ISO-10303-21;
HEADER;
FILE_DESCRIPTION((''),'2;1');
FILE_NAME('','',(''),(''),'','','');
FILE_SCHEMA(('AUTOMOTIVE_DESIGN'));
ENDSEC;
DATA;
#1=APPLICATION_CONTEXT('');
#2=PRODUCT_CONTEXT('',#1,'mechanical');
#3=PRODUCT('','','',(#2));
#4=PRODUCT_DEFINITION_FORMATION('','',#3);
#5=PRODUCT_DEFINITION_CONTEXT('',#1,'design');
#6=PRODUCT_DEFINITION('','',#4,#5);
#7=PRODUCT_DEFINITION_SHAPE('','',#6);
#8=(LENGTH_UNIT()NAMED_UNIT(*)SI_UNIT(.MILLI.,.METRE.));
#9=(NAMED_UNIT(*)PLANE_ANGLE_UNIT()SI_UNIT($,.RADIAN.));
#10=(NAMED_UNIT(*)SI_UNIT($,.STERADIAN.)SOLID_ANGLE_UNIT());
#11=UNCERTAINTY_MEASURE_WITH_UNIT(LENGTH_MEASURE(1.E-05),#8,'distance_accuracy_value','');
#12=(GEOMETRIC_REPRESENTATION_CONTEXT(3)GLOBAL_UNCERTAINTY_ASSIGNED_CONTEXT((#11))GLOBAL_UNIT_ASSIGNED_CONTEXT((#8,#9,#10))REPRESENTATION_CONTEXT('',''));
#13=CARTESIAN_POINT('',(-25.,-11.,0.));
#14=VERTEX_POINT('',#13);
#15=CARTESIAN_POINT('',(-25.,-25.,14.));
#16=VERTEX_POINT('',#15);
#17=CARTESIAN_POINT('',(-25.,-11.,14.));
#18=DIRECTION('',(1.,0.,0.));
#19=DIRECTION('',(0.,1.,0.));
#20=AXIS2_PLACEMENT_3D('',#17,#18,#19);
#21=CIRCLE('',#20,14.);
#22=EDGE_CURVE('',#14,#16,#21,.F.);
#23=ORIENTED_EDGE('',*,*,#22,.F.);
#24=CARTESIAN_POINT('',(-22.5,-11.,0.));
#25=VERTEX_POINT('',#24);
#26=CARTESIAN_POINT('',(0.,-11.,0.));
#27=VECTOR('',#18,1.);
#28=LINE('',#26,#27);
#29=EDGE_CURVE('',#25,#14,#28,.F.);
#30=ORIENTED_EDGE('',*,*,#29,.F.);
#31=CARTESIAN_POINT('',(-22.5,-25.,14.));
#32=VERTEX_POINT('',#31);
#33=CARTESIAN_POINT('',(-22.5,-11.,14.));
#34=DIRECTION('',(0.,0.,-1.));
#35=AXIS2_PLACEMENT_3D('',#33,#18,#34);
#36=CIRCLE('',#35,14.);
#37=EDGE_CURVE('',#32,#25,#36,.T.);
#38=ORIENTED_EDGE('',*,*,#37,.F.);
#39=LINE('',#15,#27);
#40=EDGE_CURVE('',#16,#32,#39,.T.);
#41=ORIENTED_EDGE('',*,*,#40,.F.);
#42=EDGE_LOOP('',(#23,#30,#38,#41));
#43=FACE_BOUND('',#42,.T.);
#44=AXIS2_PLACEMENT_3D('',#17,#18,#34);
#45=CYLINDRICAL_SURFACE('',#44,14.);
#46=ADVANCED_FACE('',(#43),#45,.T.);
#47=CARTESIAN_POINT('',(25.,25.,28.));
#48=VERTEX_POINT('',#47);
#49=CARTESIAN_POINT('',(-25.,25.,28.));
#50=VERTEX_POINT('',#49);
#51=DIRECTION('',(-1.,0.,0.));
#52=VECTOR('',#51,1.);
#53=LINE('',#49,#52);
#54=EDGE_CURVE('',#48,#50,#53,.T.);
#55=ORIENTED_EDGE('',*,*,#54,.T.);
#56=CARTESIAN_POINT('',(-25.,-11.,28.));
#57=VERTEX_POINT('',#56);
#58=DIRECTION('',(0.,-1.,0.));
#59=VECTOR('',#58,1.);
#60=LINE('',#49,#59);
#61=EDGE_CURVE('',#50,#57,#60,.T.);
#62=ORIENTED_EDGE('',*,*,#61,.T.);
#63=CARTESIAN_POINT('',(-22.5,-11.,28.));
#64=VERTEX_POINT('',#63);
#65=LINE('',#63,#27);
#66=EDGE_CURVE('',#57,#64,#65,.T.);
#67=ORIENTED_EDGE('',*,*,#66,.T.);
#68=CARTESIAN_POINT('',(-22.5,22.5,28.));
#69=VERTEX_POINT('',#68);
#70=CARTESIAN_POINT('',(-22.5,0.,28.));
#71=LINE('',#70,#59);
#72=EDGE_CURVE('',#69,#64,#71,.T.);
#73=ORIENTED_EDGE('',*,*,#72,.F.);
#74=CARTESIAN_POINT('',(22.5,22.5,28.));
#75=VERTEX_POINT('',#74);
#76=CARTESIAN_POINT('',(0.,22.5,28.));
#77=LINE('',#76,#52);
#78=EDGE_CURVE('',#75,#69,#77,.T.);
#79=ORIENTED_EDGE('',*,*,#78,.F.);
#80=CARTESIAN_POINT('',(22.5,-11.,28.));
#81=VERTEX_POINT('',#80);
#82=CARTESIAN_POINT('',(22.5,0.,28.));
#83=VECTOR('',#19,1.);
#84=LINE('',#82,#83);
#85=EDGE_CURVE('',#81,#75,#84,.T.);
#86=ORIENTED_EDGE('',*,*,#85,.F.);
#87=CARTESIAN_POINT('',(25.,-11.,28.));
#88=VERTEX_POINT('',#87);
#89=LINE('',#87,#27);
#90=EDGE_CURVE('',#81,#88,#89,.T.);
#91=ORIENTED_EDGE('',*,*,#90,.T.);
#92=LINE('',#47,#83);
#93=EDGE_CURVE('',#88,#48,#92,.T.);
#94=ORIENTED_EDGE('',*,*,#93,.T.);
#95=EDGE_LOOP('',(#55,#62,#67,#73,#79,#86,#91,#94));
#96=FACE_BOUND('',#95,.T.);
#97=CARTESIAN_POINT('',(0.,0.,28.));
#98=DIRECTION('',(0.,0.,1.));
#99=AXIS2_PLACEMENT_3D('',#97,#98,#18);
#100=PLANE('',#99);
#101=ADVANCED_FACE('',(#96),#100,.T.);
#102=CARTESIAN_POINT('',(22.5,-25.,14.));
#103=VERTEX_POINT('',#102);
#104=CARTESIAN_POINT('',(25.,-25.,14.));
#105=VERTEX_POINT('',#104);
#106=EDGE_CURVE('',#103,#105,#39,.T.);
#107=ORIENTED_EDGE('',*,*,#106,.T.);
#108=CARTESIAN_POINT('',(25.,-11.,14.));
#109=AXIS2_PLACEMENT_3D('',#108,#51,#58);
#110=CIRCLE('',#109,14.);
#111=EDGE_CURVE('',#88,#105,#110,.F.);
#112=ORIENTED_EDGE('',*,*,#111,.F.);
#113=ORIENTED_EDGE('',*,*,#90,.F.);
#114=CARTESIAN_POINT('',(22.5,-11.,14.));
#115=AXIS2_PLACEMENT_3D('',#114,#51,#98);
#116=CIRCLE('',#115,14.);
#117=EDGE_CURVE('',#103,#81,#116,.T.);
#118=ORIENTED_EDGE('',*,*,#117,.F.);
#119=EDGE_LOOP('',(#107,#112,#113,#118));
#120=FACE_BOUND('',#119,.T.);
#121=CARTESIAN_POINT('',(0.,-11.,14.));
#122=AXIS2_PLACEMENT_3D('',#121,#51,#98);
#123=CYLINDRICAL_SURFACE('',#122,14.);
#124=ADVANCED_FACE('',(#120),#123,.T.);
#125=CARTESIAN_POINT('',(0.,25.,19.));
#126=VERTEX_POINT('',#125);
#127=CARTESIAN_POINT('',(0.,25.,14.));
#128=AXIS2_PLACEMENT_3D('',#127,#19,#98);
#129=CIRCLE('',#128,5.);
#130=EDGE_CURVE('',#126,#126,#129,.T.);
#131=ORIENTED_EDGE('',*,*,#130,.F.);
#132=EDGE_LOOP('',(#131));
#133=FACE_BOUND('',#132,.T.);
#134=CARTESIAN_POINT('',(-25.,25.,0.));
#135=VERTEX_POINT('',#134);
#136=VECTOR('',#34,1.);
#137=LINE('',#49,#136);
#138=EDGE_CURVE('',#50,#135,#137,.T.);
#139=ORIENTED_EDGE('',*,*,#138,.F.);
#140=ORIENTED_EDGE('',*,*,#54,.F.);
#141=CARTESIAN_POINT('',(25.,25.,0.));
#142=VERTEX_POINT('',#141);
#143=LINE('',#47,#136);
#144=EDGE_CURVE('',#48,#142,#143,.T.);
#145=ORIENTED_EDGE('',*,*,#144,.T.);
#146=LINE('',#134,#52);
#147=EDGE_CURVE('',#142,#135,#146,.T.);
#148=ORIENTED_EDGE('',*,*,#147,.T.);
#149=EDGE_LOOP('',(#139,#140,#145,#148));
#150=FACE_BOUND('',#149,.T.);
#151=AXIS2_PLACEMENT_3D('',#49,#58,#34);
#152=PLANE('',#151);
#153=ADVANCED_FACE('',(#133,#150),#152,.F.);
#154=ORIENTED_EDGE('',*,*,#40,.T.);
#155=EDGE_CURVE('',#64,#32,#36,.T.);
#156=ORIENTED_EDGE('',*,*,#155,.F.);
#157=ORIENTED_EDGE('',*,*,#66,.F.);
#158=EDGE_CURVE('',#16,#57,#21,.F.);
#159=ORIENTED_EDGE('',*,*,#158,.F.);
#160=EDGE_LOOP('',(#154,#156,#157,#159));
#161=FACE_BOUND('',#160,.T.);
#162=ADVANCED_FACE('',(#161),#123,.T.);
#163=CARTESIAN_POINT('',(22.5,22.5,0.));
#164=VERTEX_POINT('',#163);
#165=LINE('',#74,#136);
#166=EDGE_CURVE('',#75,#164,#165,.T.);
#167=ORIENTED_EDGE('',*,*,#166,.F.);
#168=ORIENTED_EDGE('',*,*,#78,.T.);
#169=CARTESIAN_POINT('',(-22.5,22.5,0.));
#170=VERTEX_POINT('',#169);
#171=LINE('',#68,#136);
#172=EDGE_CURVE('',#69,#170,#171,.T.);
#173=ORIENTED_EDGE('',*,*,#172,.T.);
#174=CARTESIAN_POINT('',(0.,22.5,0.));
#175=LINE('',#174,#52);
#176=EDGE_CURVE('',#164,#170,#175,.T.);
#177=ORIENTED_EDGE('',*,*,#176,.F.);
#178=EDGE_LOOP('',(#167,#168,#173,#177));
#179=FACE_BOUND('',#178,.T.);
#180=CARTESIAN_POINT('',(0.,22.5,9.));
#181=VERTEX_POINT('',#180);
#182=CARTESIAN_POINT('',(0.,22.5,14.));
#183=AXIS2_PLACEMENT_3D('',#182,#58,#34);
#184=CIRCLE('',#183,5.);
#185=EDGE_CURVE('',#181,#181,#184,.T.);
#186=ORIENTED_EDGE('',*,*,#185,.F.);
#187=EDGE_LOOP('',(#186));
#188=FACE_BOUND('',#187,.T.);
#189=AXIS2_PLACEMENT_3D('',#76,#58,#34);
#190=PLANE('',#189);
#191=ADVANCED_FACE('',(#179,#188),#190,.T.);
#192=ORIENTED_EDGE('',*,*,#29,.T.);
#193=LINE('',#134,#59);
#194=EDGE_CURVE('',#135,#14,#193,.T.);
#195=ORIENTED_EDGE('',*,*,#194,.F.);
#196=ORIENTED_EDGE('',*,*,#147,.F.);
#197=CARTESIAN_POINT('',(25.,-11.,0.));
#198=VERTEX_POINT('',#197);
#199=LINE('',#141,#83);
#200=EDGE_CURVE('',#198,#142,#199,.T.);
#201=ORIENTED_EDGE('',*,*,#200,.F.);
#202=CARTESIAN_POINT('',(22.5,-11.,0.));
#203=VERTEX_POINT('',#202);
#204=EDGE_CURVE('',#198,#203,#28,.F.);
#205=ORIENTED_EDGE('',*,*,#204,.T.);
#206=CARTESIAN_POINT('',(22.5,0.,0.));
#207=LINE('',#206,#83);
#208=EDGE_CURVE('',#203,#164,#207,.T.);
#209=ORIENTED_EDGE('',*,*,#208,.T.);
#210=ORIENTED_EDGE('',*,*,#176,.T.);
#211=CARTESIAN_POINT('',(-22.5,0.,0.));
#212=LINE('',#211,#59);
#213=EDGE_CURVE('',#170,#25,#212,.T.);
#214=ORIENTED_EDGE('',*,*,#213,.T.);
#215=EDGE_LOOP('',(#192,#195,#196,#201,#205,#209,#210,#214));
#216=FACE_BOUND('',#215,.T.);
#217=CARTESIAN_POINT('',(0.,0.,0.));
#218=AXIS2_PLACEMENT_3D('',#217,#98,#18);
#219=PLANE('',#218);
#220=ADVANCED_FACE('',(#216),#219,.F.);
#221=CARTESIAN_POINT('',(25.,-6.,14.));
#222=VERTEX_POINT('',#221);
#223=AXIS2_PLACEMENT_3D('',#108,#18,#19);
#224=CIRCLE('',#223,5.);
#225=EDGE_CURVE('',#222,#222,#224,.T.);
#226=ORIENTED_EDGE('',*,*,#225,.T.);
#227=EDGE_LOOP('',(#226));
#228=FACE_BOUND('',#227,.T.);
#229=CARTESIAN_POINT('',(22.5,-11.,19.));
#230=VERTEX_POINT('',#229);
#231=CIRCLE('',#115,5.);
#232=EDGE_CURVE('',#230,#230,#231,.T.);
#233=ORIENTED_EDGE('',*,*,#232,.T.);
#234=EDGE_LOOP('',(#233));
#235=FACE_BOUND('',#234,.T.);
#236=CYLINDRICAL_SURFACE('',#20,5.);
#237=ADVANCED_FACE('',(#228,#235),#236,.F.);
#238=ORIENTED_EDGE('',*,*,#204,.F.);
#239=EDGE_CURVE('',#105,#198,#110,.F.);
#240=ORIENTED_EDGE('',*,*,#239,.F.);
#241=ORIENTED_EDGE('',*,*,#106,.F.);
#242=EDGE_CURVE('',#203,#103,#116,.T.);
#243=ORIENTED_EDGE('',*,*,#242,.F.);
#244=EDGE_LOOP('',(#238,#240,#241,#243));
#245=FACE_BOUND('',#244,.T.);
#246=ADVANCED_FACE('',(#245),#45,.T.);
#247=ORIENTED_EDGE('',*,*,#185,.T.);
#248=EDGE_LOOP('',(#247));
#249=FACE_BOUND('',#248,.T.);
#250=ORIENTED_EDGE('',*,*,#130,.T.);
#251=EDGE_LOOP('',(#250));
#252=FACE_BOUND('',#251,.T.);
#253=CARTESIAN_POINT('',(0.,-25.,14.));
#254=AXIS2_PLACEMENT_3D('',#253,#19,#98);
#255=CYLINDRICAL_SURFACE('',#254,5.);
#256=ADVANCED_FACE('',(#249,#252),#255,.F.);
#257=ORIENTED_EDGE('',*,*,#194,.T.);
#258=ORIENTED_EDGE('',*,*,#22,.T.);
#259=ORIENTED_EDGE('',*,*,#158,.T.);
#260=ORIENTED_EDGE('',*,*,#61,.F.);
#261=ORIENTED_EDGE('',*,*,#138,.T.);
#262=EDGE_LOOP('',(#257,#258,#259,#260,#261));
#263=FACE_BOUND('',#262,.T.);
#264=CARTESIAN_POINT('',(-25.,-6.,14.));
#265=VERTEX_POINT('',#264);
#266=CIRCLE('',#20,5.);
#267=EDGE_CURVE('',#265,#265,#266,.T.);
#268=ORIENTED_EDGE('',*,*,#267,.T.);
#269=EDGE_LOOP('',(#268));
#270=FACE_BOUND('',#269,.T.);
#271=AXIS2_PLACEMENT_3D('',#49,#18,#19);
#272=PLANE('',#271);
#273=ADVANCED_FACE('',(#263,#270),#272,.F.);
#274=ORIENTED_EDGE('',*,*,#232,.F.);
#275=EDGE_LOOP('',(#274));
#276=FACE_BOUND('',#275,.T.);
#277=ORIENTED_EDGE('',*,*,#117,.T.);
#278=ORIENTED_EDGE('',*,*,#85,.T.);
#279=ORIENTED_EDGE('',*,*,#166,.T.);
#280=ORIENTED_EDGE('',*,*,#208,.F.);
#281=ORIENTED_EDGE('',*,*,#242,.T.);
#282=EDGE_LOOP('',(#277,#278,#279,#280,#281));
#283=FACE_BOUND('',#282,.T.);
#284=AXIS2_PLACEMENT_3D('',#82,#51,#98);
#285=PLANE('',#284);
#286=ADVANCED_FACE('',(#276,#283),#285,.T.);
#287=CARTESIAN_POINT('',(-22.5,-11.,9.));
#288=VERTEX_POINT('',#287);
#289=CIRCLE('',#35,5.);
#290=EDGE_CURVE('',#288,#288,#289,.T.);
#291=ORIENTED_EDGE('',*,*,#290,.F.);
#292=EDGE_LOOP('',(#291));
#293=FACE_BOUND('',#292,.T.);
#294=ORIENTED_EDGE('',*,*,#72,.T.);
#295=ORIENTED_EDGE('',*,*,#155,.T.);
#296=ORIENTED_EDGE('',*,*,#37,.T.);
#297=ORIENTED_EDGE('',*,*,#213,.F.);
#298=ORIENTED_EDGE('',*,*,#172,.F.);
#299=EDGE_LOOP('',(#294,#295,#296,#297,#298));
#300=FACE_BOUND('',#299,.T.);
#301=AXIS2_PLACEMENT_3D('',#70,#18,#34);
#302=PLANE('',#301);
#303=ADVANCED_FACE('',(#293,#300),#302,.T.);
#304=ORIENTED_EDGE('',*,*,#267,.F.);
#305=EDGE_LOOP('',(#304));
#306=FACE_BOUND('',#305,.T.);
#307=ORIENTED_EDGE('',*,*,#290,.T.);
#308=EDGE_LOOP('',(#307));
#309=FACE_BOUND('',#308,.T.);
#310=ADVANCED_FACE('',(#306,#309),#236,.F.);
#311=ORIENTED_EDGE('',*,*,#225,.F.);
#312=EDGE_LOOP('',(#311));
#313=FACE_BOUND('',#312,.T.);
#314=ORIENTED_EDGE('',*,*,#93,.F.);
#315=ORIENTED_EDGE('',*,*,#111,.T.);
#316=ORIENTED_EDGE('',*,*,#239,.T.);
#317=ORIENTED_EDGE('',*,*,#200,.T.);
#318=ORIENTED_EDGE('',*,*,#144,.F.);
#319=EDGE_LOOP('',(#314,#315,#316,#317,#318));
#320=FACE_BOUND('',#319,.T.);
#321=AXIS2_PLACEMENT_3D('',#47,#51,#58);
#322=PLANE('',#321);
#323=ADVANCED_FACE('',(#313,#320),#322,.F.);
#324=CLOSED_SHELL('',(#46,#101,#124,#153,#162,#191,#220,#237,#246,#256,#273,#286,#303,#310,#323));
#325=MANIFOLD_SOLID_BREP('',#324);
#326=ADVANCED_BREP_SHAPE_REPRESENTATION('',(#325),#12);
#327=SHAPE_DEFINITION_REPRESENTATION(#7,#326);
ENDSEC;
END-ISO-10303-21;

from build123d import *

# Parameters (mm, degrees)
ESBO_O1_W                = 50
ESBO_O1_H                = 50
RESSALTO_EXTRUS_O1_DEPTH = 28
ESBO_O2_W                = 45
ESBO_O2_H                = 47.5
CORTE_EXTRUS_O1_DEPTH    = 28
ESBO_O3_R                = 5
CORTE_EXTRUS_O2_DEPTH    = 63.521996129
ESBO_O4_R                = 5
CORTE_EXTRUS_O3_DEPTH    = 63.521996129
FILETE1_R                = 14


with BuildPart() as part:
    # Esboço1 → Ressalto-extrusão1 (new body)
    with BuildSketch(Plane.XY):
        Rectangle(ESBO_O1_W, ESBO_O1_H)
    extrude(amount=RESSALTO_EXTRUS_O1_DEPTH)

    # Esboço2 → Corte-extrusão1 (cut)
    with BuildSketch(Plane(origin=(0, 0, 0), x_dir=(-1, 0, 0), z_dir=(0, 0, -1))):
        with Locations((0, -1.25)):
            Rectangle(ESBO_O2_W, ESBO_O2_H)
    extrude(amount=-CORTE_EXTRUS_O1_DEPTH, mode=Mode.SUBTRACT)

    # Esboço3 → Corte-extrusão2 (cut, through all)
    with BuildSketch(Plane(origin=(0, 25, 0), x_dir=(1, 0, 0), z_dir=(0, 1, 0))):
        with Locations(Location((0, -14, 0), (0, 0, 270))):
            Circle(ESBO_O3_R)
    extrude(amount=-CORTE_EXTRUS_O2_DEPTH, mode=Mode.SUBTRACT)

    # Esboço4 → Corte-extrusão3 (cut, through all)
    with BuildSketch(Plane(origin=(25, 0, 0), x_dir=(0, 0, -1), z_dir=(1, 0, 0))):
        with Locations(Location((-14, -11, 0), (0, 0, 90))):
            Circle(ESBO_O4_R)
    extrude(amount=-CORTE_EXTRUS_O3_DEPTH, mode=Mode.SUBTRACT)

    # Filete1
    filete1_edges = [part.edges().sort_by_distance(p)[0] for p in [
        (23.75, -25, 28),
        (-23.75, -25, 28),
        (-23.75, -25, 0),
        (23.75, -25, 0),
    ]]
    fillet(filete1_edges, radius=FILETE1_R - 0.0001)  # a hair under: the kernel refuses the full size


solid = part.part
